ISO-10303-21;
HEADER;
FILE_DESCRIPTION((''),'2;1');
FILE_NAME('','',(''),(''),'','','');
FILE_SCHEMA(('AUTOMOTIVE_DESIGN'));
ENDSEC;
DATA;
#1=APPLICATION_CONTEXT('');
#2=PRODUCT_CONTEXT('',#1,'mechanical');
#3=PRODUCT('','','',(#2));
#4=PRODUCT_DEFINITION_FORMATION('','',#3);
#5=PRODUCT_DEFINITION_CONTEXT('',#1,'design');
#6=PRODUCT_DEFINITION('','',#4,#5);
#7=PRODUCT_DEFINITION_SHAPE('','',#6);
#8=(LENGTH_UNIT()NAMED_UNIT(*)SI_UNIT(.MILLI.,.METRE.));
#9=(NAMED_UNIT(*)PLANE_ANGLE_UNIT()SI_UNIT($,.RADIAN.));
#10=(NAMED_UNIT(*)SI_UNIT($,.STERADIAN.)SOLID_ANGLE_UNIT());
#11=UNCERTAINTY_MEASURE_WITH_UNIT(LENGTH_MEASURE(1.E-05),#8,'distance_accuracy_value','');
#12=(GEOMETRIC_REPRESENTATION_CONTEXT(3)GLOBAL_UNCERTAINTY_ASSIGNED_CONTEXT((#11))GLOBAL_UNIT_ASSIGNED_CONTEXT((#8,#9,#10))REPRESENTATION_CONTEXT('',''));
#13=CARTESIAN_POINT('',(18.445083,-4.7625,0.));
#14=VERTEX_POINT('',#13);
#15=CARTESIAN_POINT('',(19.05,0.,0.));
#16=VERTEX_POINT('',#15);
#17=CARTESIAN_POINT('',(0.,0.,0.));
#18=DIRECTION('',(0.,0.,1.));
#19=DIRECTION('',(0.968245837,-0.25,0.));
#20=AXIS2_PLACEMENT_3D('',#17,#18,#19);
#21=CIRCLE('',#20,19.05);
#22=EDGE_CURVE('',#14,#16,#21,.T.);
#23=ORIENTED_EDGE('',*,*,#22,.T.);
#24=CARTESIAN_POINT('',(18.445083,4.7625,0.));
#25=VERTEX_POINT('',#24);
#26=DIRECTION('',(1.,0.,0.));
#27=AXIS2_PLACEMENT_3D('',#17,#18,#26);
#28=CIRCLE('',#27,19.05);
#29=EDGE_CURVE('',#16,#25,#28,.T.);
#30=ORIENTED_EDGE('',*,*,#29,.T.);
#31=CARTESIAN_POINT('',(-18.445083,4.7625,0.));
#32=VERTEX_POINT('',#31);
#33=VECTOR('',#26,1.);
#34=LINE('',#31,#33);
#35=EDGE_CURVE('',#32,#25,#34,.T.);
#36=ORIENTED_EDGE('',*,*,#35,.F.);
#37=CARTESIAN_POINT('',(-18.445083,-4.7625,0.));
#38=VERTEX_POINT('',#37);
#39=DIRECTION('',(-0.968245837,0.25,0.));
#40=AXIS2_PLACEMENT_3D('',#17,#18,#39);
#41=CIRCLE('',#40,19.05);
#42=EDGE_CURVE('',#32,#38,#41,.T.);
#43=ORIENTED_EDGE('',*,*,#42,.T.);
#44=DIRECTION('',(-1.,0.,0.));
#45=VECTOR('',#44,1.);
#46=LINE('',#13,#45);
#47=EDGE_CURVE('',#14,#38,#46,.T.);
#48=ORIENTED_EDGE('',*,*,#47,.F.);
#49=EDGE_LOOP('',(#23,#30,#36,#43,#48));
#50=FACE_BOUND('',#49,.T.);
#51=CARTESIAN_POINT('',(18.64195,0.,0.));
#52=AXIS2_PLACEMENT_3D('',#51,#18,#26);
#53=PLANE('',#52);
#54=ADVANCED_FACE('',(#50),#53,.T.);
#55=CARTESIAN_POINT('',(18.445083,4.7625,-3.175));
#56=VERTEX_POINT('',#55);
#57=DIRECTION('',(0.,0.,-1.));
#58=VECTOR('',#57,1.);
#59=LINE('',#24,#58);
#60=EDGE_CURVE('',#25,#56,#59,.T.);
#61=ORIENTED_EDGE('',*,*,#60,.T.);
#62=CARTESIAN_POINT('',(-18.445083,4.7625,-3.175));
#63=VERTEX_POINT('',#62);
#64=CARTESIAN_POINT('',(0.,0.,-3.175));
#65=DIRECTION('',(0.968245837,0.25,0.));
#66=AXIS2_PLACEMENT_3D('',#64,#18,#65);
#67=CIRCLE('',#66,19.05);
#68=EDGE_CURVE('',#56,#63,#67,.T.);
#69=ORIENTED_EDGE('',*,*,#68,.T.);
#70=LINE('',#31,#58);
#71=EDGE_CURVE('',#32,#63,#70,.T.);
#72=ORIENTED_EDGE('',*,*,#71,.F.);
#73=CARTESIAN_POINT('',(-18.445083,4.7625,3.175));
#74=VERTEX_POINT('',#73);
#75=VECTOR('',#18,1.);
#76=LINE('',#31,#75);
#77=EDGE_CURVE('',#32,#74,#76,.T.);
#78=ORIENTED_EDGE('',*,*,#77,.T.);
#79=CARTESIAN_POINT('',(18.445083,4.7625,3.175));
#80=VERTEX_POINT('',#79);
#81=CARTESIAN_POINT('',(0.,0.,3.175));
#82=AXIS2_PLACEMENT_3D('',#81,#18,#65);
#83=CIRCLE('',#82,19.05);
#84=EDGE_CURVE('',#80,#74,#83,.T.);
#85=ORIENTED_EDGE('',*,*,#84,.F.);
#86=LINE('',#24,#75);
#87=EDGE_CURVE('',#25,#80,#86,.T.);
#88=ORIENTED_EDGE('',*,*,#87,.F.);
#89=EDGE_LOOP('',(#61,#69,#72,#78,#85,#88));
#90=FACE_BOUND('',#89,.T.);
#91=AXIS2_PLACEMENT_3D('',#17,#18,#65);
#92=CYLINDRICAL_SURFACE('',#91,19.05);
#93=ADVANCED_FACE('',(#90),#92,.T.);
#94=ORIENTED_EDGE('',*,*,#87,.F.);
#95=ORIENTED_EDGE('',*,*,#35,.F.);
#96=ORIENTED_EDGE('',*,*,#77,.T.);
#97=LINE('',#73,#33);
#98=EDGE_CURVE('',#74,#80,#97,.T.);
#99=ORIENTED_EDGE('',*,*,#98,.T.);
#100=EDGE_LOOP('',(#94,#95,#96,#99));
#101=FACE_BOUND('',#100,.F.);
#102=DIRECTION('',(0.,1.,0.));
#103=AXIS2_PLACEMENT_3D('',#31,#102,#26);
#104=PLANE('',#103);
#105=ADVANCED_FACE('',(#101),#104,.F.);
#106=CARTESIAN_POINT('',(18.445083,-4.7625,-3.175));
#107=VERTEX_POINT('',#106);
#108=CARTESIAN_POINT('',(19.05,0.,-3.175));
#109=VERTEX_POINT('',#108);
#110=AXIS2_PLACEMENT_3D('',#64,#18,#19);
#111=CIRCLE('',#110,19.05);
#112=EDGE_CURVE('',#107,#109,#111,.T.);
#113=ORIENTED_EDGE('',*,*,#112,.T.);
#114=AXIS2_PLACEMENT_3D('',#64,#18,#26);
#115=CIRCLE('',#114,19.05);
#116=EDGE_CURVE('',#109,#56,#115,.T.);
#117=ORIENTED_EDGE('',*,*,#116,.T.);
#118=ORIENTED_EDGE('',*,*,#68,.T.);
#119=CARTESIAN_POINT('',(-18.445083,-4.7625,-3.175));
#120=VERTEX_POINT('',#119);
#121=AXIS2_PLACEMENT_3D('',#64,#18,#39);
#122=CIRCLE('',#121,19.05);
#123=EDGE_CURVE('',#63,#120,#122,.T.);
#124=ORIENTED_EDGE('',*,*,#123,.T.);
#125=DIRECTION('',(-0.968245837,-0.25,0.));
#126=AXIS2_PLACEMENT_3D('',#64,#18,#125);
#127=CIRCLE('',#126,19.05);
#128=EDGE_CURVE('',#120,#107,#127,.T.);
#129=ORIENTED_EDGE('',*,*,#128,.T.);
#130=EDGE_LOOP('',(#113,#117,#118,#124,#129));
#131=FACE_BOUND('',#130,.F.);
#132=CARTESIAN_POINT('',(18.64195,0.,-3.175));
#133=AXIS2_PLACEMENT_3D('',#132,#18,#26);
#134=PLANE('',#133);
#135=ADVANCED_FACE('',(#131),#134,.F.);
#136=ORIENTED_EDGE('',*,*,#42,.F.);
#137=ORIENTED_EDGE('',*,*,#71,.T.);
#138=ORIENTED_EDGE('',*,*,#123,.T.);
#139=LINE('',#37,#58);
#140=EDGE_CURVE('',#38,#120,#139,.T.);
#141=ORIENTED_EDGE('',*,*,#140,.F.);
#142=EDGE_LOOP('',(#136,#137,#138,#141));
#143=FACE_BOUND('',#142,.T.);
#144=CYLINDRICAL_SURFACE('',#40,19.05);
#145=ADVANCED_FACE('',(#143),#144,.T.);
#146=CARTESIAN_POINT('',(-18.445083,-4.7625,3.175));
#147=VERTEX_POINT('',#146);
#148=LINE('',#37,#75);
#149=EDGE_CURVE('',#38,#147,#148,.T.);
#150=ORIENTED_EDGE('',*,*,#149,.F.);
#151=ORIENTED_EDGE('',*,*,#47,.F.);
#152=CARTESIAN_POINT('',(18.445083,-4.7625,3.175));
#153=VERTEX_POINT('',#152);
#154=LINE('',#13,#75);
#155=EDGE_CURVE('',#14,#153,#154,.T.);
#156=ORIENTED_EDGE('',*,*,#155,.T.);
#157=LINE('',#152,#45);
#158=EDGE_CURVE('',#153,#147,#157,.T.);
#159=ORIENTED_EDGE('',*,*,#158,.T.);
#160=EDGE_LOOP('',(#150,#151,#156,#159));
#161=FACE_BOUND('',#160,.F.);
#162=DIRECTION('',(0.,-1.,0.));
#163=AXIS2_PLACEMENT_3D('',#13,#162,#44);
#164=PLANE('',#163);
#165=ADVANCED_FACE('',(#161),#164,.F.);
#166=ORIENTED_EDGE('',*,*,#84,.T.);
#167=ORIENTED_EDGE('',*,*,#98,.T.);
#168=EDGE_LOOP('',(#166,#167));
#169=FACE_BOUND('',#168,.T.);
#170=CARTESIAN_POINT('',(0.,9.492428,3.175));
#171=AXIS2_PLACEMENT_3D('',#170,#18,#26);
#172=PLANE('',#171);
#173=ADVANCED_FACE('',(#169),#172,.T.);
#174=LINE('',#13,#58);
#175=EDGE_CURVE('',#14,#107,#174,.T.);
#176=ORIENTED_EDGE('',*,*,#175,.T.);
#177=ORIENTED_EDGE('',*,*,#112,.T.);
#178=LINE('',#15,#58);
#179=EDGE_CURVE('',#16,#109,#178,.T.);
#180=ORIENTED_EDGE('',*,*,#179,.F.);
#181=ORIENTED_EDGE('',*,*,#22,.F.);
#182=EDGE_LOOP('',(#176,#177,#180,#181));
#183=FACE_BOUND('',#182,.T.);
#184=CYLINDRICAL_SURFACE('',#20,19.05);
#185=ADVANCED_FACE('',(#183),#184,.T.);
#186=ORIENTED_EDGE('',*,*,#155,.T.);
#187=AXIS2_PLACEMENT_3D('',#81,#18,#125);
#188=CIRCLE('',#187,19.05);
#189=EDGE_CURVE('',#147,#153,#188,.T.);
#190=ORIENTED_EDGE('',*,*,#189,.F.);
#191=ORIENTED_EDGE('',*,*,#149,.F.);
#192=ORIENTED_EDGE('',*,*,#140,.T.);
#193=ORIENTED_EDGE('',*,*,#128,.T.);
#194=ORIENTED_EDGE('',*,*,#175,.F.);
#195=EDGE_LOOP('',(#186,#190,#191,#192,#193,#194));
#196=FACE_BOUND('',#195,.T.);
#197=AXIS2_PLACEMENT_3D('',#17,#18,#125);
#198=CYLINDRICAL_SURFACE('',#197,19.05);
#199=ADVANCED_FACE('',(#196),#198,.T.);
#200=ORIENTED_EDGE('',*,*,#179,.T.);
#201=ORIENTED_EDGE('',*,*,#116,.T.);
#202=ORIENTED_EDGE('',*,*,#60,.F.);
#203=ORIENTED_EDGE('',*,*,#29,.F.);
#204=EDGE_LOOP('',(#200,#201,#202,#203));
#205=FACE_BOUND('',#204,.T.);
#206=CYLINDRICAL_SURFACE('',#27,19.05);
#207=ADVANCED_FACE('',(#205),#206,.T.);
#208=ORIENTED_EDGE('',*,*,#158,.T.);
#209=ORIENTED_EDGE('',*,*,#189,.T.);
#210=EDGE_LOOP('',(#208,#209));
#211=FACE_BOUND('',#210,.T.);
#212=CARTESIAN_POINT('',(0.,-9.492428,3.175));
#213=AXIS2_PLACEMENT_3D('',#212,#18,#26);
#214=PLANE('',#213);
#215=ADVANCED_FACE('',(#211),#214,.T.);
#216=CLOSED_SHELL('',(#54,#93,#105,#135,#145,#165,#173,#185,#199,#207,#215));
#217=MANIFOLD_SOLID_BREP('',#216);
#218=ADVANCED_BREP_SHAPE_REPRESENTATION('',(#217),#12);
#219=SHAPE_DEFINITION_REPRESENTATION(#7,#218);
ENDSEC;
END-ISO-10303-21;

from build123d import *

# Parameters (mm, degrees)
F1_DEPTH = 3.175
F0_W     = 36.8901663726
F0_H     = 9.525
F2_DEPTH = 3.175


with BuildPart() as f1:
    # F0 (on Top) → F1 (new body)
    with BuildSketch(Plane.XY):
        with BuildLine():
            Line((-18.4450831863, 4.7625), (18.4450831863, 4.7625))
            ThreePointArc((18.4450831863, 4.7625), (0, 19.05), (-18.4450831863, 4.7625))
        make_face()
    extrude(amount=F1_DEPTH)



with BuildPart() as f1b:
    # F0 (on Top) → F1, piece 2 (new body)
    with BuildSketch(Plane.XY):
        with BuildLine():
            ThreePointArc((-18.4450831863, -4.7625), (0, -19.05), (18.4450831863, -4.7625))
            Line((18.4450831863, -4.7625), (-18.4450831863, -4.7625))
        make_face()
    extrude(amount=F1_DEPTH)


with BuildPart() as f1_1:
    add(f1.part)

    add(f1b.part)  # F2 merges F1b
    # F0 (on Top) → F2 (join)
    with BuildSketch(Plane.XY):
        with BuildLine():
            ThreePointArc((18.4450831863, -4.7625), (18.8981657139, -2.4003817718), (19.05, 0))
            ThreePointArc((19.05, 0), (18.8981657139, 2.4003817718), (18.4450831863, 4.7625))
            Line((18.4450831863, 4.7625), (18.4450831863, -4.7625))
        make_face()
        with BuildLine():
            Line((-18.4450831863, 4.7625), (18.4450831863, 4.7625))
            ThreePointArc((18.4450831863, 4.7625), (0, 19.05), (-18.4450831863, 4.7625))
        make_face()
        Rectangle(F0_W, F0_H)
        with BuildLine():
            ThreePointArc((-18.4450831863, -4.7625), (0, -19.05), (18.4450831863, -4.7625))
            Line((18.4450831863, -4.7625), (-18.4450831863, -4.7625))
        make_face()
        with BuildLine():
            Line((-18.4450831863, -4.7625), (-18.4450831863, 4.7625))
            ThreePointArc((-18.4450831863, 4.7625), (-19.05, 0), (-18.4450831863, -4.7625))
        make_face()
    extrude(amount=-F2_DEPTH)


solid = f1_1.part
